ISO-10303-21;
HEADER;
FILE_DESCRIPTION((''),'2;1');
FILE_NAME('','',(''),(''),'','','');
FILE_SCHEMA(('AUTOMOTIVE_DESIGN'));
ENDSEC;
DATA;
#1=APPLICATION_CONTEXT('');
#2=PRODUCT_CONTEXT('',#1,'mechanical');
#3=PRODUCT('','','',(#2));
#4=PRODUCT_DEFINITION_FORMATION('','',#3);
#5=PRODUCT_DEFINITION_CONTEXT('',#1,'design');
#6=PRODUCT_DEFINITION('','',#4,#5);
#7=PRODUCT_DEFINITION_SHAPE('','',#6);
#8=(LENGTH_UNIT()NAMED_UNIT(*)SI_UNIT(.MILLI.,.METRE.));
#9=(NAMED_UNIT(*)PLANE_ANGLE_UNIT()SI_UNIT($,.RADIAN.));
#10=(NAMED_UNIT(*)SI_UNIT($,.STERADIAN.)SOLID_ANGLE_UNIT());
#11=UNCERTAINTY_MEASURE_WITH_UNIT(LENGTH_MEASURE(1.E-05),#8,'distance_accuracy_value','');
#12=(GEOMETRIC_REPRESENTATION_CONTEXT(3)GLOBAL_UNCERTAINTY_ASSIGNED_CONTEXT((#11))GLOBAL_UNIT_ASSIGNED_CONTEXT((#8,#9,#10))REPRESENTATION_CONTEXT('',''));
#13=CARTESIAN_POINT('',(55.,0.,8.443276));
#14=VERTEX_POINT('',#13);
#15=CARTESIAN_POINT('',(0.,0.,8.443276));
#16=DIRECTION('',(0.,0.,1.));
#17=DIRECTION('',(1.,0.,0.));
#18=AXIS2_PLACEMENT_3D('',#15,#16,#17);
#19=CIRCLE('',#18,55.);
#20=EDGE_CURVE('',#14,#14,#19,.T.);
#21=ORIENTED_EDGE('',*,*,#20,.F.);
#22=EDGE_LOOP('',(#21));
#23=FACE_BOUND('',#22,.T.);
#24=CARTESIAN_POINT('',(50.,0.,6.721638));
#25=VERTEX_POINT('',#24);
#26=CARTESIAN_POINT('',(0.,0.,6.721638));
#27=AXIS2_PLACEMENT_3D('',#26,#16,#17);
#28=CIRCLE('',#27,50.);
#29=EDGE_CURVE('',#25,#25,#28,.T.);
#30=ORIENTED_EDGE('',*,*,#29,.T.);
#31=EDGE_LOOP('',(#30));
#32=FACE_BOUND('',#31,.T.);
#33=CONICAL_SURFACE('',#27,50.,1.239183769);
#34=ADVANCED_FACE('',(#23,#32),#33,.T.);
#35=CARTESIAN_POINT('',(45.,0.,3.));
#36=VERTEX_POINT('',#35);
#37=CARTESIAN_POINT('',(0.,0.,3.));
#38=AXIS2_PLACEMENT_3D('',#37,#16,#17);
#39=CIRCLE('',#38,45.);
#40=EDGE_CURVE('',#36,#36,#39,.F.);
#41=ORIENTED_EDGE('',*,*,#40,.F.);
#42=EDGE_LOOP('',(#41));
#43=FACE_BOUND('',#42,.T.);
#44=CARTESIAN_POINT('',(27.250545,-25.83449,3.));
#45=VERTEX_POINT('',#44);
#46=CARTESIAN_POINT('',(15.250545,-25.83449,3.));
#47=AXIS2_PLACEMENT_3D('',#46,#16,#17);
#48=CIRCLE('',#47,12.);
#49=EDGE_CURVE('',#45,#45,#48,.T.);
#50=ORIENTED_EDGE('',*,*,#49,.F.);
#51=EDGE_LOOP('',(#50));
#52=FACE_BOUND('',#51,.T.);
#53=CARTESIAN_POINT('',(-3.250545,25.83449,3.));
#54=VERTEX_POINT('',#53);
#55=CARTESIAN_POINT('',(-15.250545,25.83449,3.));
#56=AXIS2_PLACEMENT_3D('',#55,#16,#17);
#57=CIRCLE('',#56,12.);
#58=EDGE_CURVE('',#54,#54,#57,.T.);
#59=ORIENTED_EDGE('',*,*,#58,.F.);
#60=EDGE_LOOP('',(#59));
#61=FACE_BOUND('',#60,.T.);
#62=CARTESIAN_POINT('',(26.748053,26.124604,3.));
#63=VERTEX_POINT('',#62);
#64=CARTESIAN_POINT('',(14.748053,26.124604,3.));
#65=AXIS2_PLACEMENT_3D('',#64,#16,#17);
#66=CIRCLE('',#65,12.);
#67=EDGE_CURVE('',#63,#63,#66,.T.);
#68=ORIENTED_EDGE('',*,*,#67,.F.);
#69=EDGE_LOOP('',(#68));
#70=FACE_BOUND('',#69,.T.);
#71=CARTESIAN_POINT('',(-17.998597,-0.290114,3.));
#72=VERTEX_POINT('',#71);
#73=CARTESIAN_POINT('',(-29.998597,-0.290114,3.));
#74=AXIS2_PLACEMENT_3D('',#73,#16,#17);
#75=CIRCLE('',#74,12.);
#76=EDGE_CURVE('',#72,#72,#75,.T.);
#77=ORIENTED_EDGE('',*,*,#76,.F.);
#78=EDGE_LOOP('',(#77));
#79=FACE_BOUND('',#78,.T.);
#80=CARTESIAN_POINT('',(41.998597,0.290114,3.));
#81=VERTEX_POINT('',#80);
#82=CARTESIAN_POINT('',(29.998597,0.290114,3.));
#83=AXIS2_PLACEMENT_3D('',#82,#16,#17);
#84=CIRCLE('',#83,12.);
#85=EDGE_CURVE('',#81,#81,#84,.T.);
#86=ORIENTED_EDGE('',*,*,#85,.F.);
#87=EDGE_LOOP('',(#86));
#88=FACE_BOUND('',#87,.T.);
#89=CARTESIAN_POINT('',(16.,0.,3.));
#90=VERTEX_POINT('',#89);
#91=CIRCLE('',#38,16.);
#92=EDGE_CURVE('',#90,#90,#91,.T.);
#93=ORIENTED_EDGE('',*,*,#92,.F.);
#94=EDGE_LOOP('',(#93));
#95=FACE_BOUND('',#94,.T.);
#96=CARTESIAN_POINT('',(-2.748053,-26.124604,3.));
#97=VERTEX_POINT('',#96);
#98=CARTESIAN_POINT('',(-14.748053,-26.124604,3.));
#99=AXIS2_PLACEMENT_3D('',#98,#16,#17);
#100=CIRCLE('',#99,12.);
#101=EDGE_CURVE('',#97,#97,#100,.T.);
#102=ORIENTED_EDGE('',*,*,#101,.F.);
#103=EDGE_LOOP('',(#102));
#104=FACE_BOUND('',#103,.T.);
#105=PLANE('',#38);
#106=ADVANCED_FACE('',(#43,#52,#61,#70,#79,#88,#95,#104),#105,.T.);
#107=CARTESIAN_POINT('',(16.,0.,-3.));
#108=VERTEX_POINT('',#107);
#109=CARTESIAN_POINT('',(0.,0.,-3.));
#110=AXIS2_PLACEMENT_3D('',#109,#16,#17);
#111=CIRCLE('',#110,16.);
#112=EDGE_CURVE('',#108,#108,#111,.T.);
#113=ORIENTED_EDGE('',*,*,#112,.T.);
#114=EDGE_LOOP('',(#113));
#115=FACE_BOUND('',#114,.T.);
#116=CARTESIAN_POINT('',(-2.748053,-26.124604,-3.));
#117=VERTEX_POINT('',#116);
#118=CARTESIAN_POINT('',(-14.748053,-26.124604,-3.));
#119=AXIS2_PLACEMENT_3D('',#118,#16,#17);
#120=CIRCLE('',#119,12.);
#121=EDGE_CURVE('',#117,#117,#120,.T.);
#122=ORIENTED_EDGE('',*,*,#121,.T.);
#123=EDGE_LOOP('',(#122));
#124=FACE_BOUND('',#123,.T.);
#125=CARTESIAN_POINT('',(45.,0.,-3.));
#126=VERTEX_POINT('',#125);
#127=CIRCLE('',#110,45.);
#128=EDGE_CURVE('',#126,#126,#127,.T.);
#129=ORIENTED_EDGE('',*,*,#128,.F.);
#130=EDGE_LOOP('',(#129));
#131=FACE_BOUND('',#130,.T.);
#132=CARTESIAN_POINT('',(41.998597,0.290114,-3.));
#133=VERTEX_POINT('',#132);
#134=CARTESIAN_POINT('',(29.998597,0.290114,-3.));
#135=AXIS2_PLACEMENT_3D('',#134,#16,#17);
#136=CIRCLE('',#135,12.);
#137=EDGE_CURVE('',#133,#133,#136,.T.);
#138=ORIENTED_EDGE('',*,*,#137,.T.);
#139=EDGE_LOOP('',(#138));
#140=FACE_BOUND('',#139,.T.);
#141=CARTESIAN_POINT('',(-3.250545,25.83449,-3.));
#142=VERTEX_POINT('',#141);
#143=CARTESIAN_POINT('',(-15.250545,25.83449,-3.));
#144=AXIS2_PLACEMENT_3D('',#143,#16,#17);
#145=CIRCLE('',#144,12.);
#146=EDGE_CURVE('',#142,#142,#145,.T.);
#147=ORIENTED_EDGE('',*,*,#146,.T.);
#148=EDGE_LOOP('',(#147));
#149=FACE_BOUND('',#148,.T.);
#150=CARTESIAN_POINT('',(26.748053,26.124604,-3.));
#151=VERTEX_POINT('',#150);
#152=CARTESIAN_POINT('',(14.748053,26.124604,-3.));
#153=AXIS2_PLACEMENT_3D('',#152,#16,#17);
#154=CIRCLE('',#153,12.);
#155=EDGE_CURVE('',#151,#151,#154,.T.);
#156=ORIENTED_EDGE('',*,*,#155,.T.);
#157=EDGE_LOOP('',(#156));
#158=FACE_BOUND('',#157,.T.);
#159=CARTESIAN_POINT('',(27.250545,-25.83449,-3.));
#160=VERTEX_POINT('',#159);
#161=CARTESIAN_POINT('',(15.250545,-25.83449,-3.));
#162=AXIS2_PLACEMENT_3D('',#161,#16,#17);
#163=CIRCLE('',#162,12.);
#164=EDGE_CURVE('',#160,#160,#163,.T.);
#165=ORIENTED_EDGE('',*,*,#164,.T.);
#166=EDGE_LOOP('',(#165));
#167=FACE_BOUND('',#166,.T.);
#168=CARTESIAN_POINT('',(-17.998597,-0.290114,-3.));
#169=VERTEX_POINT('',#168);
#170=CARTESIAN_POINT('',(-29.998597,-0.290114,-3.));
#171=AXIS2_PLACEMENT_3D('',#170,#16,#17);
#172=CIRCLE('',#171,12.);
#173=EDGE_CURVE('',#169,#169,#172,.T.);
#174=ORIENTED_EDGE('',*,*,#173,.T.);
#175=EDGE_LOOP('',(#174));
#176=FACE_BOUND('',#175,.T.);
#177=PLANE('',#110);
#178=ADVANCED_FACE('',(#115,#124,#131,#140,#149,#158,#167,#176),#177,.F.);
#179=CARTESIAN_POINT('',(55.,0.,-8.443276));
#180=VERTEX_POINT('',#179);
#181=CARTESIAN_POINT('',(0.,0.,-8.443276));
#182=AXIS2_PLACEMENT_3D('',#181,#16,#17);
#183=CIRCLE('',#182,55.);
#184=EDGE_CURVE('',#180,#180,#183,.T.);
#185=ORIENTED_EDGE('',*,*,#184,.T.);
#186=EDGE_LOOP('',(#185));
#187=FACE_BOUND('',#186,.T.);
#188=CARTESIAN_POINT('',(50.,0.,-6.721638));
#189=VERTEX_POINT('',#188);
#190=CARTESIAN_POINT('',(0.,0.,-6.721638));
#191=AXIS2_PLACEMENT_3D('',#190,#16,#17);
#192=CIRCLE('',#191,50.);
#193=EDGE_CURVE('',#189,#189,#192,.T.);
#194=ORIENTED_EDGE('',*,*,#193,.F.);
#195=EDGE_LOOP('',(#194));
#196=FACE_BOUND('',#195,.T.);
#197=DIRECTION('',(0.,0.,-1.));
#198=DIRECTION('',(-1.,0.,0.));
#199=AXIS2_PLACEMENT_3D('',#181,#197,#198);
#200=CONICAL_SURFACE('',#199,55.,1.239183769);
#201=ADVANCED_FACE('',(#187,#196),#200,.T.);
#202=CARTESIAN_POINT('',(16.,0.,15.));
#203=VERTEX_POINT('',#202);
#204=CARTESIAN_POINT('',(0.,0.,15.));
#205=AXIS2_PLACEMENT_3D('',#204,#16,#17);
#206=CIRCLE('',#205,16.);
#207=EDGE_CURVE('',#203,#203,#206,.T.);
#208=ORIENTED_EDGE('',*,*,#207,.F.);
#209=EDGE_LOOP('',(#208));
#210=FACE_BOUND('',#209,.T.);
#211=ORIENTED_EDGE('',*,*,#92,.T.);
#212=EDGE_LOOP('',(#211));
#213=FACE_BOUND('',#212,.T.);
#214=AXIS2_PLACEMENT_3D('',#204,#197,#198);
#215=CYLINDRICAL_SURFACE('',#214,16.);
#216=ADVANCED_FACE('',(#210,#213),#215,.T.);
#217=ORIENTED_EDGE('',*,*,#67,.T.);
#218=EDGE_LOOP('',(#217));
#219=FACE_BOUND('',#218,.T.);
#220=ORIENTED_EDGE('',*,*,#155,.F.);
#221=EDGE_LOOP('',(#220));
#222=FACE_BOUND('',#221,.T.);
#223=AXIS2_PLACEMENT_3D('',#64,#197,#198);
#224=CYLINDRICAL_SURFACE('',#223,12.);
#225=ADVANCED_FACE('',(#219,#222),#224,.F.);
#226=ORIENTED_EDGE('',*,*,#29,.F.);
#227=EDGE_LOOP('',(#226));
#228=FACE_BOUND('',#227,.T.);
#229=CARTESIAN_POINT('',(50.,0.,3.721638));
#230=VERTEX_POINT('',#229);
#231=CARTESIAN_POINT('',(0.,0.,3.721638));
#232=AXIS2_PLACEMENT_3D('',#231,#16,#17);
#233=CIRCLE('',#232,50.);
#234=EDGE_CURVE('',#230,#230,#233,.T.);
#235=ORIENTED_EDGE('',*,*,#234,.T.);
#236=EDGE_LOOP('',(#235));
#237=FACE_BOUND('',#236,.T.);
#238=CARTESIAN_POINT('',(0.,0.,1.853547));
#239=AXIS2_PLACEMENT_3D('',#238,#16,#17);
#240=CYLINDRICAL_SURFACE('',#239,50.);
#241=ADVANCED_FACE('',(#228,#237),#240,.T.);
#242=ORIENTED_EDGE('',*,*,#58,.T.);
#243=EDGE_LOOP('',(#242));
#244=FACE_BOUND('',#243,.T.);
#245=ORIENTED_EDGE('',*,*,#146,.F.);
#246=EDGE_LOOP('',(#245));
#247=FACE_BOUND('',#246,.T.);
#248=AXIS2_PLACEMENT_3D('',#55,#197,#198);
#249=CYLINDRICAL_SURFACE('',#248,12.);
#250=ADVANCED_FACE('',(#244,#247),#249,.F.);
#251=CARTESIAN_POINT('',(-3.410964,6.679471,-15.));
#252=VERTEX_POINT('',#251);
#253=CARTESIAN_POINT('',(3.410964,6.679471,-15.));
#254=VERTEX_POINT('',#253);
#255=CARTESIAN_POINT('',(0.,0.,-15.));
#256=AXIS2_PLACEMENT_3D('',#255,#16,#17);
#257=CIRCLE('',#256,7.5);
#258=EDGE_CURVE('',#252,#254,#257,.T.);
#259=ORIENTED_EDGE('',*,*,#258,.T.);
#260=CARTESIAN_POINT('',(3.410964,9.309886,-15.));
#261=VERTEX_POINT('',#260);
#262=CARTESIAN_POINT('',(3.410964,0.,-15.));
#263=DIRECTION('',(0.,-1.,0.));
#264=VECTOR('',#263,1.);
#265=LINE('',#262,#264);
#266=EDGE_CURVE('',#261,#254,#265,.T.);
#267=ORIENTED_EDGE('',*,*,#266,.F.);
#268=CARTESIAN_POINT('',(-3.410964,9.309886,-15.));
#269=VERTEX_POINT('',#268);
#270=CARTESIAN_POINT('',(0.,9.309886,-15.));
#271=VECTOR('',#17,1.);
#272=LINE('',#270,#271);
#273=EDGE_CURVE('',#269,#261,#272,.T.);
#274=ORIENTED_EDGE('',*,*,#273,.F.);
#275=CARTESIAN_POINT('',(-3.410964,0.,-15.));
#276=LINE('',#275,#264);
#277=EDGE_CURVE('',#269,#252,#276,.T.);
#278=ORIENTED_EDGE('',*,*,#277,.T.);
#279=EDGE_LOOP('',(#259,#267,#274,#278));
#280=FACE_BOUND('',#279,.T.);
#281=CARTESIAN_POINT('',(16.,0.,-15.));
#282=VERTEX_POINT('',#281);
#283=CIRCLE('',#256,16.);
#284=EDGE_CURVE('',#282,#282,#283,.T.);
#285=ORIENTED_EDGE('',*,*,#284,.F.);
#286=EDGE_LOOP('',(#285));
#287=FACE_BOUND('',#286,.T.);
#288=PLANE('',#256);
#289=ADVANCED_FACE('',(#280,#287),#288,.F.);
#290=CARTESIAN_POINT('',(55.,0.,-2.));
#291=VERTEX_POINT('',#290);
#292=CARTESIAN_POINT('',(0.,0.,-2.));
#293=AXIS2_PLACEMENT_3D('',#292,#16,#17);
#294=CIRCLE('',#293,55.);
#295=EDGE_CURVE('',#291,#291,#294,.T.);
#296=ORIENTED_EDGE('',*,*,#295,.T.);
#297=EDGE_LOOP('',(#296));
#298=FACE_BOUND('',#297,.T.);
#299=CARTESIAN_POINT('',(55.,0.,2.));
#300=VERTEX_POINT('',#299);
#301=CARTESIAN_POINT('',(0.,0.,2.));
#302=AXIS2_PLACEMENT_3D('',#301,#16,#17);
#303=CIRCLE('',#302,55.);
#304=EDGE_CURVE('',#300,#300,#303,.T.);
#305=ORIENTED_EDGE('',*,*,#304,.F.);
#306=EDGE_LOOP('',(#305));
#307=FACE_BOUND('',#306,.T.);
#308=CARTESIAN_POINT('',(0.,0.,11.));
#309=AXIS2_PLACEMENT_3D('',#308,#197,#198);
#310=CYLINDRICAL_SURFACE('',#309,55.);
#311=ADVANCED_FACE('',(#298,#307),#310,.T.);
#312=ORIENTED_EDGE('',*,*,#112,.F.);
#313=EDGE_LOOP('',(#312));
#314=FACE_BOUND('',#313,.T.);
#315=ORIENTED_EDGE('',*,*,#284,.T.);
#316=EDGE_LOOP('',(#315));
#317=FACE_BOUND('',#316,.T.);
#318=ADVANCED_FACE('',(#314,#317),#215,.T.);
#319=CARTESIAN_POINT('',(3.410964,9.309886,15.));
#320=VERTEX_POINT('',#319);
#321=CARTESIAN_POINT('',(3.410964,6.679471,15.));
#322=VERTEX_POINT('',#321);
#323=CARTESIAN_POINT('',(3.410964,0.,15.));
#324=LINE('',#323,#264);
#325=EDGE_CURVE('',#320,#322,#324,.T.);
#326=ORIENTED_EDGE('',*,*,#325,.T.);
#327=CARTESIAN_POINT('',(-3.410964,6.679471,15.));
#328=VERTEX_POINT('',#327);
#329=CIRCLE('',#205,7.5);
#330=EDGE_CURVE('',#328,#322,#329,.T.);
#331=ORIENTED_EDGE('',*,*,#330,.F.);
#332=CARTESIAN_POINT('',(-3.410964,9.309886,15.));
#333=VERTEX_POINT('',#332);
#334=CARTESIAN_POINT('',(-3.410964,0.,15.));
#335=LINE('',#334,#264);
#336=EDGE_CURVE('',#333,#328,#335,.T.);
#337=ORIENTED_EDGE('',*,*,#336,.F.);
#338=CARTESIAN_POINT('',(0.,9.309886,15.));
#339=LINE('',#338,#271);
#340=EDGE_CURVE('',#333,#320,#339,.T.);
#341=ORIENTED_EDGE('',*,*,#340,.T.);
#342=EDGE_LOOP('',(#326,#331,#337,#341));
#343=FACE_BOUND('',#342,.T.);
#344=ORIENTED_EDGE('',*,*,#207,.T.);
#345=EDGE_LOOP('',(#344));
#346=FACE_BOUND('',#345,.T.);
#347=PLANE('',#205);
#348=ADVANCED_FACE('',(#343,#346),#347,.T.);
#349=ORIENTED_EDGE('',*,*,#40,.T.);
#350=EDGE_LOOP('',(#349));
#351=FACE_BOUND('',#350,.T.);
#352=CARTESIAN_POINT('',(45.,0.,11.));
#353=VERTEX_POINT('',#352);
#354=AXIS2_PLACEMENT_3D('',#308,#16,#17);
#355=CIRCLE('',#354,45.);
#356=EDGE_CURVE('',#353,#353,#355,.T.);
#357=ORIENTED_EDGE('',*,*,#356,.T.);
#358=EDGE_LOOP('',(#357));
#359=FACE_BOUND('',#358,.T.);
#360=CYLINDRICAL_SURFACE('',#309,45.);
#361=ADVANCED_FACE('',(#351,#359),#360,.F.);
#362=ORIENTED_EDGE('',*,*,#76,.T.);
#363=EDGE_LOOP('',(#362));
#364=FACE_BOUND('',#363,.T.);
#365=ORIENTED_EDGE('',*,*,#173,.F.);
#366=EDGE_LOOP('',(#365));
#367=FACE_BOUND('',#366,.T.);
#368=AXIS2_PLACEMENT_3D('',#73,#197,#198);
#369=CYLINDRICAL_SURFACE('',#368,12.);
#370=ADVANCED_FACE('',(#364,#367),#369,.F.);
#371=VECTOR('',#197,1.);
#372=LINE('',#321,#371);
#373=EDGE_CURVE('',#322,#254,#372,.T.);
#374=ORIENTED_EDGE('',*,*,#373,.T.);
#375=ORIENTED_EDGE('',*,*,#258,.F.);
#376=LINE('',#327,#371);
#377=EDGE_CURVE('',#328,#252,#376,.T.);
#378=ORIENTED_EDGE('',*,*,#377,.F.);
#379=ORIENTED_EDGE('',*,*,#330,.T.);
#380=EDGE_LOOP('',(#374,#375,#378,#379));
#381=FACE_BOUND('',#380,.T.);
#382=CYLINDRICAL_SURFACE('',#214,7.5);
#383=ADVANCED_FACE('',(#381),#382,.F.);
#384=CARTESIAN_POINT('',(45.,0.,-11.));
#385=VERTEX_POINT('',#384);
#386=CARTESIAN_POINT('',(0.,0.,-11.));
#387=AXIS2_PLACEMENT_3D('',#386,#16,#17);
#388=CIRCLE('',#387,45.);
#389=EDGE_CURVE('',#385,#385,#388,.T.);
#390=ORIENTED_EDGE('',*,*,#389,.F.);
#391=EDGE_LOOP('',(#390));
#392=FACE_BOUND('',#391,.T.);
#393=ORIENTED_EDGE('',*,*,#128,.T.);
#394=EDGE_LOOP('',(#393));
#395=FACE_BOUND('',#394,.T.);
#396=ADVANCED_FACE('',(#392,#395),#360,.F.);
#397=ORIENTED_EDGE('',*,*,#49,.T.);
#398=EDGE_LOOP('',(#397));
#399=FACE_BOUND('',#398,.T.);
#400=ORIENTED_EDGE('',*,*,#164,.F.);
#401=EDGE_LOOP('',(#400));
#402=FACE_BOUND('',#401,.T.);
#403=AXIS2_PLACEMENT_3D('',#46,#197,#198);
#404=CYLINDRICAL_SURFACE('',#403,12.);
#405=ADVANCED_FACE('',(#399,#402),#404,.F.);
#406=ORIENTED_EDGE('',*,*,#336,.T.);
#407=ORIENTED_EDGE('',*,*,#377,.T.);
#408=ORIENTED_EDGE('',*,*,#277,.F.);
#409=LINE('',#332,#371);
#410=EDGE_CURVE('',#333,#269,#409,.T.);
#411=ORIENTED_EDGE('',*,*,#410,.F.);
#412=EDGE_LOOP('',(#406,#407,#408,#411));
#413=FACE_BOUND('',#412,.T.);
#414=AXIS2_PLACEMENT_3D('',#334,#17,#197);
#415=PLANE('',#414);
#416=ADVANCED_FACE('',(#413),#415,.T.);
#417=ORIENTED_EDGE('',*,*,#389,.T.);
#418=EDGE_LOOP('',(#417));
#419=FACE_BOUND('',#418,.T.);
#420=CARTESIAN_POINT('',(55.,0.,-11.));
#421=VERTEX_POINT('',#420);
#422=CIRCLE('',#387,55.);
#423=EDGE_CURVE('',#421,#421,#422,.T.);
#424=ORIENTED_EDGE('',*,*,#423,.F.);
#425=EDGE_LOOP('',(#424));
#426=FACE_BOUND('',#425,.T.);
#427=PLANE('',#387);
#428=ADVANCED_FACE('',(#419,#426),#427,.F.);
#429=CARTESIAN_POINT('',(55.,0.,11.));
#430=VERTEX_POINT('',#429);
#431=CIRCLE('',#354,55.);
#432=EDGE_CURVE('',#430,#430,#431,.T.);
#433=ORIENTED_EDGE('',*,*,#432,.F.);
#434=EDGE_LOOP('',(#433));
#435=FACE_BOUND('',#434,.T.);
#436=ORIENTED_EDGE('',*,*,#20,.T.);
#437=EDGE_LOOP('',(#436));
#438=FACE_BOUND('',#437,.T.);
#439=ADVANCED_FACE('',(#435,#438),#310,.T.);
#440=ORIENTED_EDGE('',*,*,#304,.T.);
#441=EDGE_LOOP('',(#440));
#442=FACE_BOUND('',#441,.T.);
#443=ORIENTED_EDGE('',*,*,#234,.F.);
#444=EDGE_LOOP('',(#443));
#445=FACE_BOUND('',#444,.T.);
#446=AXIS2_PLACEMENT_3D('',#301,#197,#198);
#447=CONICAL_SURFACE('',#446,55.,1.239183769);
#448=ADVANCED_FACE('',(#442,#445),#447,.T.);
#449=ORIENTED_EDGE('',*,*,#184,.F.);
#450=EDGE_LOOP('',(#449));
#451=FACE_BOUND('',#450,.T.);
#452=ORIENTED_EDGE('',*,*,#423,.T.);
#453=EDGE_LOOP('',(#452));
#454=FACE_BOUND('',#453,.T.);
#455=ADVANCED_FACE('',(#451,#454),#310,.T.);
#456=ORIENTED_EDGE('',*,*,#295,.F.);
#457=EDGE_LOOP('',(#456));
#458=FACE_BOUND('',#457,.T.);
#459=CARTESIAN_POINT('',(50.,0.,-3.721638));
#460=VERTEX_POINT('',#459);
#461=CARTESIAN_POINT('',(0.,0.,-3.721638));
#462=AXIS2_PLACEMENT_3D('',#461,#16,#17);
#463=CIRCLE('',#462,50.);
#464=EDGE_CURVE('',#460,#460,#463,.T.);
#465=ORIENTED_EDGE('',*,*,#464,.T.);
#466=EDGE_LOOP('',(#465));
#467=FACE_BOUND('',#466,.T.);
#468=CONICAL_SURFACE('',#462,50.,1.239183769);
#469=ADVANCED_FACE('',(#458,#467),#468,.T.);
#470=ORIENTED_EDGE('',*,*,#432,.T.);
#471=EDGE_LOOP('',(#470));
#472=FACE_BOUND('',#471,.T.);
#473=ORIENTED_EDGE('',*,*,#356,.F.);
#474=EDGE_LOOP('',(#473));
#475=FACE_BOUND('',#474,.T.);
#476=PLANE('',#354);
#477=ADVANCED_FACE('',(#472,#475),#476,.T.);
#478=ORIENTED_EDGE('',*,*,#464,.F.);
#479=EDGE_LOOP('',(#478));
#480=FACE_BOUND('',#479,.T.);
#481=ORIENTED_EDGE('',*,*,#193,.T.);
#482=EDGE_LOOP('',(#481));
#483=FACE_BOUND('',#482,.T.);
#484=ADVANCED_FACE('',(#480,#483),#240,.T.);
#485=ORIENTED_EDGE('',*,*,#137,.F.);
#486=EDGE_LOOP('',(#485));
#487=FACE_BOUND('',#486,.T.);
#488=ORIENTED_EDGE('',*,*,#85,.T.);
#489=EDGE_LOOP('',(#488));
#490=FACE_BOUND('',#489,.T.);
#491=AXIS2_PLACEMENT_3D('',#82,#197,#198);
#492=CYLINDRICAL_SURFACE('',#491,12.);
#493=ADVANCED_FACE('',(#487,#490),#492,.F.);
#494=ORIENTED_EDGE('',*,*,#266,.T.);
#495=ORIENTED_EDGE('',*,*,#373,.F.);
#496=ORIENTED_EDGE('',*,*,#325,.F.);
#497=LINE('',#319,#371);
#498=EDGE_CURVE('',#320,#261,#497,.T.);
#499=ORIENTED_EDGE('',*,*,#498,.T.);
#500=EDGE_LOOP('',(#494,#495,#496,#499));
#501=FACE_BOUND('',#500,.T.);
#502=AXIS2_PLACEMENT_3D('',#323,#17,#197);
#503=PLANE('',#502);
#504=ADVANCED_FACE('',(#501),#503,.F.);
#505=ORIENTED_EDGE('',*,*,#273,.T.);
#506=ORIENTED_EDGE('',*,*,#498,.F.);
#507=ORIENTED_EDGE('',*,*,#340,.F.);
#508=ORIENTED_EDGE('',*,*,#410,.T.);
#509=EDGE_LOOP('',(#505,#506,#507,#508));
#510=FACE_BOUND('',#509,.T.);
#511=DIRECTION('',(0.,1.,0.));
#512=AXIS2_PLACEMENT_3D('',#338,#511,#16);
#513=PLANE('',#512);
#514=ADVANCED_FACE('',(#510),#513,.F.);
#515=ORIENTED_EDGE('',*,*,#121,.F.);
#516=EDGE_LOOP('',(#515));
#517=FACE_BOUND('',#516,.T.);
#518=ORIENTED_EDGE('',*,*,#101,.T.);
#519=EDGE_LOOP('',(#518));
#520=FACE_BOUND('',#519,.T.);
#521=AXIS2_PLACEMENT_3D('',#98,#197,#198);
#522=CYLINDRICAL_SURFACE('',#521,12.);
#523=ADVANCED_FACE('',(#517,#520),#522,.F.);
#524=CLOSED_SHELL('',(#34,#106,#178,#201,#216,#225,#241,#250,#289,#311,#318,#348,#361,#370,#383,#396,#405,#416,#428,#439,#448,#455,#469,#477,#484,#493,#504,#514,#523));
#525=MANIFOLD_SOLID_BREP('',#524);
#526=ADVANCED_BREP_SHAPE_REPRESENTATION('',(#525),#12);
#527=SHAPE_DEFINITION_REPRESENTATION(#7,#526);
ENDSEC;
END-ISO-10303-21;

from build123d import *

# Parameters (mm, degrees)
SKETCH_2_R      = 16
EXTRUDE_5_DEPTH = 15
SKETCH_2_11_R   = 55
SKETCH_2_11_R_2 = 45
EXTRUDE_6_DEPTH = 11
SKETCH_2_20_R   = 45
SKETCH_2_20_R_2 = 12
SKETCH_2_20_R_3 = 16
EXTRUDE_9_DEPTH = 3


# Read off the part's stored shape, not the designer's step: 切除-旋转-薄壁6
with BuildPart() as part:
    # 草图2 → 凸台-拉伸5 (new, symmetric)
    with BuildSketch(Plane.XY):
        Circle(SKETCH_2_R)
        with BuildLine():
            ThreePointArc((-3.410963595, 6.679470589), (0, -7.5), (3.410963595, 6.679470589))
            Line((3.410963595, 6.679470589), (3.410963595, 9.309886023))
            Line((3.410963595, 9.309886023), (-3.410963595, 9.309886023))
            Line((-3.410963595, 9.309886023), (-3.410963595, 6.679470589))
        make_face(mode=Mode.SUBTRACT)
    extrude(amount=EXTRUDE_5_DEPTH, both=True)



with BuildPart() as body_2:
    # 草图2<11> → 凸台-拉伸6 (new, symmetric)
    with BuildSketch(Plane.XY):
        Circle(SKETCH_2_11_R)
        Circle(SKETCH_2_11_R_2, mode=Mode.SUBTRACT)
    extrude(amount=EXTRUDE_6_DEPTH, both=True)

    # 切除-旋转-薄壁6 outline → 切除-旋转-薄壁6 (revolve, cut)
    with BuildSketch(Plane.XZ):
        Polygon((55, -2), (50, -3.721638066), (50, -6.721638066), (55, -8.443276133), align=None)
        Polygon((50, 3.721638066), (55, 2), (55, 8.443276133), (50, 6.721638066), align=None)
    revolve(axis=Axis((0, 0, 0), (0, 0, 1)), mode=Mode.SUBTRACT)


with BuildPart() as part_1:
    add(part.part)

    add(body_2.part)  # 凸台-拉伸9 merges body 2
    # 草图2<20> → 凸台-拉伸9 (add, symmetric)
    with BuildSketch(Plane.XY):
        Circle(SKETCH_2_20_R)
        with Locations((-29.998597199, -0.290113977)):
            Circle(SKETCH_2_20_R_2, mode=Mode.SUBTRACT)
        with Locations((-15.250544673, 25.834490264)):
            Circle(SKETCH_2_20_R_2, mode=Mode.SUBTRACT)
        with Locations((14.748052526, 26.12460424)):
            Circle(SKETCH_2_20_R_2, mode=Mode.SUBTRACT)
        with Locations((29.998597199, 0.290113977)):
            Circle(SKETCH_2_20_R_2, mode=Mode.SUBTRACT)
        with Locations((15.250544673, -25.834490264)):
            Circle(SKETCH_2_20_R_2, mode=Mode.SUBTRACT)
        with Locations((-14.748052526, -26.12460424)):
            Circle(SKETCH_2_20_R_2, mode=Mode.SUBTRACT)
        Circle(SKETCH_2_20_R_3, mode=Mode.SUBTRACT)
    extrude(amount=EXTRUDE_9_DEPTH, both=True)


solid = part_1.part
